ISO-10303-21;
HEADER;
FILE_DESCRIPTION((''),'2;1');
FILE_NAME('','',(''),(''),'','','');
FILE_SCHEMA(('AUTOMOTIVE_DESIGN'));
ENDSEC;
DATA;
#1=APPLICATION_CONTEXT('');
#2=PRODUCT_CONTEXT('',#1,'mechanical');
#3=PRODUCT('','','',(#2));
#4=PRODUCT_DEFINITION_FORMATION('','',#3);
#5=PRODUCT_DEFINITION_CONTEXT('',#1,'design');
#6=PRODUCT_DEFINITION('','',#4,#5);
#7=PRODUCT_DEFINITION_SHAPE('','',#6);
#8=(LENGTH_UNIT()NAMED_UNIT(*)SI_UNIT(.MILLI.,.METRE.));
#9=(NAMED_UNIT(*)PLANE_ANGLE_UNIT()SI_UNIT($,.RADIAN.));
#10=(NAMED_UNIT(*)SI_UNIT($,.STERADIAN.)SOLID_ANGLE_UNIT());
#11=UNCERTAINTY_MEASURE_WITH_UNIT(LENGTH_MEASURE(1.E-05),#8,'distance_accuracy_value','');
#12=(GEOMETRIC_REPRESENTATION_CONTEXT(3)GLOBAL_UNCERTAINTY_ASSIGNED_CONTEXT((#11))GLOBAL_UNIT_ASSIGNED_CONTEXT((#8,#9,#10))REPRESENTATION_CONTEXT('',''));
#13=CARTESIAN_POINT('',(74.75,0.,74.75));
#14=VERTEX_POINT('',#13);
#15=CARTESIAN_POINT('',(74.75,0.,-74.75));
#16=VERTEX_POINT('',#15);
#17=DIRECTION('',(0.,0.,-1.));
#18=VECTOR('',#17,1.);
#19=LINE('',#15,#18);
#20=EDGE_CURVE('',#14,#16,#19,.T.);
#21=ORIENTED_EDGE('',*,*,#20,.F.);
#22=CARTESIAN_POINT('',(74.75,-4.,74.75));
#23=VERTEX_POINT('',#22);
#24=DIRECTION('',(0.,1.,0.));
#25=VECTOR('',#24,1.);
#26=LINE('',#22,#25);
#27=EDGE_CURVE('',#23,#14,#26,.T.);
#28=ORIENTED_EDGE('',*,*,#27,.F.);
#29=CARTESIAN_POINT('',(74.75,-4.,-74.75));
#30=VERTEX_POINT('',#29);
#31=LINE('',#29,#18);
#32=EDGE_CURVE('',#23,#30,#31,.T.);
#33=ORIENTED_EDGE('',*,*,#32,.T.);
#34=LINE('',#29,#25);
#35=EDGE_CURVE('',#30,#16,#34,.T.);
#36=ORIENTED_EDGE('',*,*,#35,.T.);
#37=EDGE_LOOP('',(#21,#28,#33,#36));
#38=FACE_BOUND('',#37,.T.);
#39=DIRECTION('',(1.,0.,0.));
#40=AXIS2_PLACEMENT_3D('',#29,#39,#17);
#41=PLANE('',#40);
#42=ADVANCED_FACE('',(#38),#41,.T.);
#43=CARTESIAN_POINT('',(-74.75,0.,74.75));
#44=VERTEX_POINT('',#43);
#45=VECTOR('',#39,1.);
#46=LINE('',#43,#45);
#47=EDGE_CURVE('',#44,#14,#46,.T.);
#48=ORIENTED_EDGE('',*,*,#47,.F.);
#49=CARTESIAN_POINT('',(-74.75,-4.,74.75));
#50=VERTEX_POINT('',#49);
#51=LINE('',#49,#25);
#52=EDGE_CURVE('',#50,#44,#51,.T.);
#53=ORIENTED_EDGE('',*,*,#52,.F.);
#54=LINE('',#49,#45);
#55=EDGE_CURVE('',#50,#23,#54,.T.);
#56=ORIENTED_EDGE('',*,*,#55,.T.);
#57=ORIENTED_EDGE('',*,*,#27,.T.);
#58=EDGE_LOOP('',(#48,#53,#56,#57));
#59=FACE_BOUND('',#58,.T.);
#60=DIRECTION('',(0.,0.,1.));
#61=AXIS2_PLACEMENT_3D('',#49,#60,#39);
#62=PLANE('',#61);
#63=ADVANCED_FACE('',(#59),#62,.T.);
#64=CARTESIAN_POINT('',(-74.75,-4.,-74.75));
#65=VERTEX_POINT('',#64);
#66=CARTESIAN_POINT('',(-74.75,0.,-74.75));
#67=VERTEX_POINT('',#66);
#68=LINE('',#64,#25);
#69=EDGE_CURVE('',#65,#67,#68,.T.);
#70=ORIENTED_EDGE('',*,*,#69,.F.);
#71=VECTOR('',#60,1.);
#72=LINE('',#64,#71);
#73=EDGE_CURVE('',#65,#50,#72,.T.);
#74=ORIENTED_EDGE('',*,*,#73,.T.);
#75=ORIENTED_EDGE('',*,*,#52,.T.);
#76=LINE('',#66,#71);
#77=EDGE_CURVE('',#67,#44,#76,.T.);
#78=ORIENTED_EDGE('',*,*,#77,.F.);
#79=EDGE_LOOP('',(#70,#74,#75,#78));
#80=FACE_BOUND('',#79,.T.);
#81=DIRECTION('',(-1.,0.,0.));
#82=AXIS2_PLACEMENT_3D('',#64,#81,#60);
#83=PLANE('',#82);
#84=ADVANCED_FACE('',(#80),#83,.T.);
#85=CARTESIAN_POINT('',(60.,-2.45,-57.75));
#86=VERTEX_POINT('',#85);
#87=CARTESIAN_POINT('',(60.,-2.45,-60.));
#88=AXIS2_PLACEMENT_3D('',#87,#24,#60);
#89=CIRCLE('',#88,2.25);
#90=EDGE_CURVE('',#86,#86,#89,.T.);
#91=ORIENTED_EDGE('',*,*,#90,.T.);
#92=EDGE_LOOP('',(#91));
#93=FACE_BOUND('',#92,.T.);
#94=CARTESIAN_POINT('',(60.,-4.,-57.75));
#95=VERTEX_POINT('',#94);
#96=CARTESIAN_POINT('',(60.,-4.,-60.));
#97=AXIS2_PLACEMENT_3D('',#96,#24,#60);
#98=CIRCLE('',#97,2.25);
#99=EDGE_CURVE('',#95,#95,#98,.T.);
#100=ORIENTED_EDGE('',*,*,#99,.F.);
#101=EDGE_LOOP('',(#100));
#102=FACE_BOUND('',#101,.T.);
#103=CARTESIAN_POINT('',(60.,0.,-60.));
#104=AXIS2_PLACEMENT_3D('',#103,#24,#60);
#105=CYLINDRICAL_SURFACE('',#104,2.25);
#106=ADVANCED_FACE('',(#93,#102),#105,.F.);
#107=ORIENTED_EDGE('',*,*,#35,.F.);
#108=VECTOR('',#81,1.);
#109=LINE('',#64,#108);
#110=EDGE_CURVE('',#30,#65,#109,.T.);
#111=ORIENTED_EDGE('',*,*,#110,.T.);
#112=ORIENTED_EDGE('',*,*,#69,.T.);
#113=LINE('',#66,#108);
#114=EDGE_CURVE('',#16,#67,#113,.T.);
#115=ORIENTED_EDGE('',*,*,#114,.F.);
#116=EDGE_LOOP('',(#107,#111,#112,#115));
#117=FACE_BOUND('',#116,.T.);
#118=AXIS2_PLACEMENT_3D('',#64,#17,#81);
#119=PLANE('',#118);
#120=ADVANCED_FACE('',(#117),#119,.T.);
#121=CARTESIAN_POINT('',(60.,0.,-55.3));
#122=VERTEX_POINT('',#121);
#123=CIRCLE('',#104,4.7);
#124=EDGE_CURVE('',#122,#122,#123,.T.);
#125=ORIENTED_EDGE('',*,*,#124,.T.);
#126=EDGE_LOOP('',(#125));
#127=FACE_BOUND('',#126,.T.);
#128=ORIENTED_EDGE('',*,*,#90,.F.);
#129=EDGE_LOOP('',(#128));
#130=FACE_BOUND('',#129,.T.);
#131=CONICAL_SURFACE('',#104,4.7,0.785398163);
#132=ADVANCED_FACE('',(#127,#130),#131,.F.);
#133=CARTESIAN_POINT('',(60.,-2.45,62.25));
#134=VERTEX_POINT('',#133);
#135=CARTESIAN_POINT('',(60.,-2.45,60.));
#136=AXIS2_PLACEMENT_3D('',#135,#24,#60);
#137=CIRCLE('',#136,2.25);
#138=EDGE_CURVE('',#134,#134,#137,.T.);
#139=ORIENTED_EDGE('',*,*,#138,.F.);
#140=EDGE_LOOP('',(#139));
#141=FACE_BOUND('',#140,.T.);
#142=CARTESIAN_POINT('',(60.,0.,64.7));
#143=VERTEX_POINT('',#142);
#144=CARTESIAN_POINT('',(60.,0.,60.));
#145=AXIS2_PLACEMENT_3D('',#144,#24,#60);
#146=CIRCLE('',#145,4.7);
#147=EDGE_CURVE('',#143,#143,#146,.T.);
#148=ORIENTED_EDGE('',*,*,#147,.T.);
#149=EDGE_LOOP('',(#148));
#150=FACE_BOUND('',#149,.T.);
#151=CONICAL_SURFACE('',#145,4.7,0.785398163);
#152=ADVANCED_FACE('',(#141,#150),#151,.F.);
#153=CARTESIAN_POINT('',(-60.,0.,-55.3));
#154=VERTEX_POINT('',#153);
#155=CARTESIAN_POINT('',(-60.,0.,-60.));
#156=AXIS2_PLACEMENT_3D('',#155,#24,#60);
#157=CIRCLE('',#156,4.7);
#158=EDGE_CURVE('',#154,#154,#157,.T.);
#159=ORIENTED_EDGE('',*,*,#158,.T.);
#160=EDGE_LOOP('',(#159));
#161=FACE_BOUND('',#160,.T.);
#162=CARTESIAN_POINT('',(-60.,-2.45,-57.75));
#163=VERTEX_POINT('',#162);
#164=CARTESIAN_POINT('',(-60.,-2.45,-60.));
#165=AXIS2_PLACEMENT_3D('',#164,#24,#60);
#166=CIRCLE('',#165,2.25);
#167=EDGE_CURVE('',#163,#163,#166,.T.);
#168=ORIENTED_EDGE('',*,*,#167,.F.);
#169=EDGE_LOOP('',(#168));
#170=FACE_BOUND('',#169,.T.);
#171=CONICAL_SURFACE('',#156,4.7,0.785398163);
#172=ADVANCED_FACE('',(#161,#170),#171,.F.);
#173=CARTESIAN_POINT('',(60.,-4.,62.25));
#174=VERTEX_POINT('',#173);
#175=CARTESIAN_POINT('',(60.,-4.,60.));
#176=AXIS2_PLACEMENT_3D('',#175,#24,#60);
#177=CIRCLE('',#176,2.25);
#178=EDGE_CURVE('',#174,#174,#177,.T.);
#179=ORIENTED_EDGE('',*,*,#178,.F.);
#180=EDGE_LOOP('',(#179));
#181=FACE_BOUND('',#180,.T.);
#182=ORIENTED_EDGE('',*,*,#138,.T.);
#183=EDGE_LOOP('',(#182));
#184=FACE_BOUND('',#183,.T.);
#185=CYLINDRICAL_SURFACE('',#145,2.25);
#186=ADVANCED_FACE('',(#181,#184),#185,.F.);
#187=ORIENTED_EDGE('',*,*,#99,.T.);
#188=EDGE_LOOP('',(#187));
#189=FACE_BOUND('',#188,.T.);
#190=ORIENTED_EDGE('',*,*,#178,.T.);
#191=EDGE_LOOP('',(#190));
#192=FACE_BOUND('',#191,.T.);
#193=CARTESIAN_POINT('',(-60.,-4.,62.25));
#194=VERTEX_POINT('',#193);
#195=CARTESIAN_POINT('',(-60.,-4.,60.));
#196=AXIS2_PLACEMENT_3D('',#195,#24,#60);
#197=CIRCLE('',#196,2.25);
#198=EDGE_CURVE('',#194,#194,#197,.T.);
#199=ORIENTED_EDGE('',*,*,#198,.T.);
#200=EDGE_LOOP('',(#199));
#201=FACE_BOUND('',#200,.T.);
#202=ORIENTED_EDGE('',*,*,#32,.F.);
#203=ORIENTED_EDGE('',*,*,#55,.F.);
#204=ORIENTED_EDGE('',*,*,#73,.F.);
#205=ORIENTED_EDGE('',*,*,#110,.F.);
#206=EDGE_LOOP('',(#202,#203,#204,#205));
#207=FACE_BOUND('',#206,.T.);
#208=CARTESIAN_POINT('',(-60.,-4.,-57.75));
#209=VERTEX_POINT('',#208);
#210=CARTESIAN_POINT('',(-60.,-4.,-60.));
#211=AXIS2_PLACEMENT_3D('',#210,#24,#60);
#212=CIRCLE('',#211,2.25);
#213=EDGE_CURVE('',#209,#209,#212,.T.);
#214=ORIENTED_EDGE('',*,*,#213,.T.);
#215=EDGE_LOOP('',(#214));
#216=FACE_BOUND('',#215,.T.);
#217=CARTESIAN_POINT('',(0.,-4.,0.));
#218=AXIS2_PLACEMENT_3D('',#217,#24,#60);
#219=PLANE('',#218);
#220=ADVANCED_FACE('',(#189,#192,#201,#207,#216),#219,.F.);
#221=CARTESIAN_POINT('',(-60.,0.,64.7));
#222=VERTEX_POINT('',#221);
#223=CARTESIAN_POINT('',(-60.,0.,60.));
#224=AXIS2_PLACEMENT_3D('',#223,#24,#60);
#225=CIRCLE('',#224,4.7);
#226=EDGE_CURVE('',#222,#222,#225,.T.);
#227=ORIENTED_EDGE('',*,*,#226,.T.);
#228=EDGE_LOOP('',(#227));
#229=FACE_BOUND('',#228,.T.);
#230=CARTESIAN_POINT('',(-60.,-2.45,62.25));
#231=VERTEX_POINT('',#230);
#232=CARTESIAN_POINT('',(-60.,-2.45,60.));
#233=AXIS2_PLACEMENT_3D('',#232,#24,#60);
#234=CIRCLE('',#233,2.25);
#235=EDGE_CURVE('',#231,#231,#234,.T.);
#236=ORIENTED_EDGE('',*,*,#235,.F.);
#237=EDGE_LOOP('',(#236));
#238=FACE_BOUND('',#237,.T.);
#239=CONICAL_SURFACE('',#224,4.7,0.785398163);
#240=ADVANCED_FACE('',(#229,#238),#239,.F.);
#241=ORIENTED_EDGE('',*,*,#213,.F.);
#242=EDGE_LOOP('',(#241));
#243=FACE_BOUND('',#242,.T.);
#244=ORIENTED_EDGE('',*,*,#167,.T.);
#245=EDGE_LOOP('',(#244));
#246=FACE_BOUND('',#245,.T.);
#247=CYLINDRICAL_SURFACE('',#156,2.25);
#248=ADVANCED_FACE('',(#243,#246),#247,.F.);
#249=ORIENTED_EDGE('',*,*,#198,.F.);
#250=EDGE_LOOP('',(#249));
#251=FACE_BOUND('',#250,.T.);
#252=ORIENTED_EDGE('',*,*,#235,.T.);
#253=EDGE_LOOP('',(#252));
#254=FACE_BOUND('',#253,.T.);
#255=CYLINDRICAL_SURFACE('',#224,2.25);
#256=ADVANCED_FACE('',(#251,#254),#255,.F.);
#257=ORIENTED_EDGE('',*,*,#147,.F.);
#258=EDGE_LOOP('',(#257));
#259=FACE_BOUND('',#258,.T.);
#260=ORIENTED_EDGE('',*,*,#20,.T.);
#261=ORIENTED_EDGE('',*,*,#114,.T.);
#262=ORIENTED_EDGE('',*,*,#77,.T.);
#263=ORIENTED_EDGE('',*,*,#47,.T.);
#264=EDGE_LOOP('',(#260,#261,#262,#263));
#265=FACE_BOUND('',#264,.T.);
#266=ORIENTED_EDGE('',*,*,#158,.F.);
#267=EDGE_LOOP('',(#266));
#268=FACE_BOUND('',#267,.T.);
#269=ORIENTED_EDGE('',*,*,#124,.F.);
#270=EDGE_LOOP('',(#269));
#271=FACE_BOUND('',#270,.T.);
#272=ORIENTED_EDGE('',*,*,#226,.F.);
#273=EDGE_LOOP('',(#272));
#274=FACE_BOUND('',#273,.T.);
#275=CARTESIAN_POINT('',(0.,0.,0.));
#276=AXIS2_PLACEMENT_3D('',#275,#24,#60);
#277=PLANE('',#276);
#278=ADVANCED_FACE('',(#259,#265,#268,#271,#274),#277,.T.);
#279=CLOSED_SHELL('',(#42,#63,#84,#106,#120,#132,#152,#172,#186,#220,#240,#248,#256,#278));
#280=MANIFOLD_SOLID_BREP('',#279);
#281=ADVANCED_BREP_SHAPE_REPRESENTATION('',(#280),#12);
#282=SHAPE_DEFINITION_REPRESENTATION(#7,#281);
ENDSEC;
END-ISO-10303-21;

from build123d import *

# Parameters (mm, degrees)
SKETCH1_W                                      = 149.5
SKETCH1_H                                      = 149.5
BASE_FLANGE1_DEPTH                             = 4
CSK_FOR_M4_FLAT_HEAD_MACHINE_SCREW1_AT_2_COUNT = 2
CSK_FOR_M4_FLAT_HEAD_MACHINE_SCREW1_AT_2_PITCH = 120
CSK_FOR_M4_FLAT_HEAD_MACHINE_SCREW1_AT_3_COUNT = 2
CSK_FOR_M4_FLAT_HEAD_MACHINE_SCREW1_AT_3_PITCH = 169.705627485
CSK_FOR_M4_FLAT_HEAD_MACHINE_SCREW1_AT_4_COUNT = 2
CSK_FOR_M4_FLAT_HEAD_MACHINE_SCREW1_AT_4_PITCH = 120


# Sheet-metal steps are written as plain solids
with BuildPart() as part:
    # Sketch1 → Base-Flange1 (new body)
    with BuildSketch(Plane(origin=(0, 0, 0), x_dir=(1, 0, 0), z_dir=(0, 1, 0))):
        Rectangle(SKETCH1_W, SKETCH1_H)
    extrude(amount=-BASE_FLANGE1_DEPTH)

    # Sketch5 → CSK for M4 Flat Head Machine Screw1 (revolve, cut)
    with BuildSketch(Plane(origin=(60, 0, -60), x_dir=(0, 0, 1), z_dir=(1, 0, 0))):
        Polygon((0, 0), (0, 4), (2.25, 4), (2.25, 2.45), (4.7, 0), align=None)
    csk_for_m4_flat_head_machine_screw1 = revolve(axis=Axis((60, 6.35, -60), (0, -1, 0)), mode=Mode.SUBTRACT)

    # CSK for M4 Flat Head Machine Screw1 at 2: CSK for M4 Flat Head Machine Screw1 ×2
    with Locations(*[(-i * CSK_FOR_M4_FLAT_HEAD_MACHINE_SCREW1_AT_2_PITCH, 0, 0) for i in range(1, CSK_FOR_M4_FLAT_HEAD_MACHINE_SCREW1_AT_2_COUNT)]):
        add(csk_for_m4_flat_head_machine_screw1, mode=Mode.SUBTRACT)

    # CSK for M4 Flat Head Machine Screw1 at 3: CSK for M4 Flat Head Machine Screw1 ×2
    with Locations(*[Vector(-0.7071067811865475, 0, 0.7071067811865476) * (i * CSK_FOR_M4_FLAT_HEAD_MACHINE_SCREW1_AT_3_PITCH) for i in range(1, CSK_FOR_M4_FLAT_HEAD_MACHINE_SCREW1_AT_3_COUNT)]):
        add(csk_for_m4_flat_head_machine_screw1, mode=Mode.SUBTRACT)

    # CSK for M4 Flat Head Machine Screw1 at 4: CSK for M4 Flat Head Machine Screw1 ×2
    with Locations(*[(0, 0, i * CSK_FOR_M4_FLAT_HEAD_MACHINE_SCREW1_AT_4_PITCH) for i in range(1, CSK_FOR_M4_FLAT_HEAD_MACHINE_SCREW1_AT_4_COUNT)]):
        add(csk_for_m4_flat_head_machine_screw1, mode=Mode.SUBTRACT)


solid = part.part
